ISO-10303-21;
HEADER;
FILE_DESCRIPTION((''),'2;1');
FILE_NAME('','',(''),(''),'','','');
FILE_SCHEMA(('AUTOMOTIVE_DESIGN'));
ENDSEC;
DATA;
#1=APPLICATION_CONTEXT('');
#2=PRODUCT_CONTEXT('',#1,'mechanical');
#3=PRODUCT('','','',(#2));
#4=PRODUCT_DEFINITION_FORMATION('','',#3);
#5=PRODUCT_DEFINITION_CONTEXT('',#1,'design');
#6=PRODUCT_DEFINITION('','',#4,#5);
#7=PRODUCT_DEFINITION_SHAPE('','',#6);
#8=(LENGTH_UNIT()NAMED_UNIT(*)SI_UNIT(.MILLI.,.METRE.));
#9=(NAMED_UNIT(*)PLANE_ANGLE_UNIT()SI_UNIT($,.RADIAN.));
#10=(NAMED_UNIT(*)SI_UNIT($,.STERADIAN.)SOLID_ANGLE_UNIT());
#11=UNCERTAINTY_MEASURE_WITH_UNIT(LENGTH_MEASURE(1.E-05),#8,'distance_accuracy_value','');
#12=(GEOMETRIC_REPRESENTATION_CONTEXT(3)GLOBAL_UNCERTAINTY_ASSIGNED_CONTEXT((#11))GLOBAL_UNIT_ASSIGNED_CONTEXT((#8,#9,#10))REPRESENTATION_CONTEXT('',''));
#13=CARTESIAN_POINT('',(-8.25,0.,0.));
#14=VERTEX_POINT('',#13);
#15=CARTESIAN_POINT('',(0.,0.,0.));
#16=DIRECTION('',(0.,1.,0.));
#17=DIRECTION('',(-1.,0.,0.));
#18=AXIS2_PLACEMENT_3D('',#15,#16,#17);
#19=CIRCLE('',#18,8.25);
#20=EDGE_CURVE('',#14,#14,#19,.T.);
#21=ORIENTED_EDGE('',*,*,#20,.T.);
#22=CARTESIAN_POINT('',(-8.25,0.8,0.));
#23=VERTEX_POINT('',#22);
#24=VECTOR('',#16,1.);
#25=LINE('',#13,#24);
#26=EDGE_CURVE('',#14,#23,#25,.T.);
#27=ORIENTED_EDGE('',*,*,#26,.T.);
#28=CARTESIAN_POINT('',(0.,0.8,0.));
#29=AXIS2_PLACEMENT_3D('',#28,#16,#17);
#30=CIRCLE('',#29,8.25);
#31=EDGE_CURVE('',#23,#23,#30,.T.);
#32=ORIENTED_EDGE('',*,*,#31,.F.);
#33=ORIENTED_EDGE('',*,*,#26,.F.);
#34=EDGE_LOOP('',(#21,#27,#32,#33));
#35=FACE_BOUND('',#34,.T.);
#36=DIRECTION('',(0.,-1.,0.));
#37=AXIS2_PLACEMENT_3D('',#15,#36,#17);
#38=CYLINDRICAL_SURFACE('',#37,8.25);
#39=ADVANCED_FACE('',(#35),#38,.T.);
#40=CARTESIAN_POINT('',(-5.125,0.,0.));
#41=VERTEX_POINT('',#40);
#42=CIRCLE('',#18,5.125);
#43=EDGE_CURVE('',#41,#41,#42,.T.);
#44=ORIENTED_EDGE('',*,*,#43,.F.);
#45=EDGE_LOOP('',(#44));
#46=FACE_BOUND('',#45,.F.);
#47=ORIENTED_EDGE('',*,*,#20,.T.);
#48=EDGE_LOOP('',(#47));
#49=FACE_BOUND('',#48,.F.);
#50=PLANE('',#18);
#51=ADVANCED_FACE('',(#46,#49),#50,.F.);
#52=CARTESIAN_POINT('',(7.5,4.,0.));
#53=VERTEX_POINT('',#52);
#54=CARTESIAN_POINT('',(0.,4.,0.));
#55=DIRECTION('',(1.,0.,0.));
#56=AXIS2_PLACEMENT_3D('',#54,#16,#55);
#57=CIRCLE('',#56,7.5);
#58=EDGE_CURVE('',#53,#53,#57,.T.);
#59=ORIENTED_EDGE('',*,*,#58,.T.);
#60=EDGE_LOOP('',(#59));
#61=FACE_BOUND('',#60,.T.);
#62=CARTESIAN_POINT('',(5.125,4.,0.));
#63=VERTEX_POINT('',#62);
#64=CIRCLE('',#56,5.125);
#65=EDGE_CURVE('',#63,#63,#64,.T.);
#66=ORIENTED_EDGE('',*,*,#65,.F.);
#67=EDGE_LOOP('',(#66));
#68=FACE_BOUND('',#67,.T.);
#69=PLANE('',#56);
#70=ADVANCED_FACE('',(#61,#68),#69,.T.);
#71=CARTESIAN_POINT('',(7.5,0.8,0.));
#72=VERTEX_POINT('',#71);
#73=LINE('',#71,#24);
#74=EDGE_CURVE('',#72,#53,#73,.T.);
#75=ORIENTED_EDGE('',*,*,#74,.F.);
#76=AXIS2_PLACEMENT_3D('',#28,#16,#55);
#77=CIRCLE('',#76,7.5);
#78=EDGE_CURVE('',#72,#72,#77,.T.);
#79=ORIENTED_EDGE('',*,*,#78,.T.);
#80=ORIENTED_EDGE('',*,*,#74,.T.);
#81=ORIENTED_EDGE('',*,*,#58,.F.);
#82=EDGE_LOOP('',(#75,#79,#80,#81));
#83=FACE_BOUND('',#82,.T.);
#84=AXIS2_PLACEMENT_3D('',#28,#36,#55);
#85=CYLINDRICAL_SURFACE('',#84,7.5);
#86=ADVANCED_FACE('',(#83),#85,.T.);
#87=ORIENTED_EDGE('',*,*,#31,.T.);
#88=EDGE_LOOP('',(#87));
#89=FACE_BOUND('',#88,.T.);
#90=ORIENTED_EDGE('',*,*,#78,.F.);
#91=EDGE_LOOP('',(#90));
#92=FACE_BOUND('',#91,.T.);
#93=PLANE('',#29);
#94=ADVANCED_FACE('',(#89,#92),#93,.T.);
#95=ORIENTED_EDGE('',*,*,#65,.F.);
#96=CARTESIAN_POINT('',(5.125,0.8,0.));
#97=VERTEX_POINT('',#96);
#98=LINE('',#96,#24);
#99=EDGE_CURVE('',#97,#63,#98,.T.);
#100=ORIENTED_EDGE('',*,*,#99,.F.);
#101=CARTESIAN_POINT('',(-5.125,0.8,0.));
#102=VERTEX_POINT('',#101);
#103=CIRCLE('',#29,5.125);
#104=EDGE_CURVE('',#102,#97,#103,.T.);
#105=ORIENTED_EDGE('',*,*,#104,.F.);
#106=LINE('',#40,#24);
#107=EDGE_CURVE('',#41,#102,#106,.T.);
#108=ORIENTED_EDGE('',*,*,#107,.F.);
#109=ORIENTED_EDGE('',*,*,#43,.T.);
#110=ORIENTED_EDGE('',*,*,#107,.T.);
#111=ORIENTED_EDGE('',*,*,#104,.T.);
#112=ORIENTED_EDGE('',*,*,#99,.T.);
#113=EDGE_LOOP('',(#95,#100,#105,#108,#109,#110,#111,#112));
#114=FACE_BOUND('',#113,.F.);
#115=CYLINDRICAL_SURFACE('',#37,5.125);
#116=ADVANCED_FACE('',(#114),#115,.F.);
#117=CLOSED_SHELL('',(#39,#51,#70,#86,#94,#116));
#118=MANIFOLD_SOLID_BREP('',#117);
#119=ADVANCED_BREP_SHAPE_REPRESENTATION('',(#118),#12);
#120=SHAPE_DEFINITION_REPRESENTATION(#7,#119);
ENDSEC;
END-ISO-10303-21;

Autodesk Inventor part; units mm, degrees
ref_plane "YZ Plane" through (0, 0, 0) normal (1, 0, 0) x (0, 1, 0)
ref_plane "XZ Plane" through (0, 0, 0) normal (0, 1, 0) x (-1, 0, 0)
ref_plane "XY Plane" through (0, 0, 0) normal (0, 0, 1) x (1, 0, 0)
sketch "Sketch1" plane through (0, 0, 0) normal (0, 1, 0) x (-1, 0, 0)
  circle A0 centre (0, 0) radius 8.25
  circle A1 centre (0, 0) radius 5.125
  dimension "d0" = 16.5
  dimension "d1" = 10.25
extrude "Extrusion1" add sketch "Sketch1" along normal blind 0.8
sketch "Sketch2" plane through (0, 0.8, 0) normal (0, 1, 0) x (1, 0, 0)
  circle A0 centre (0, 0) radius 7.5
  circle A1 centre (0, 0) radius 5.125 projected
  dimension "d4" = 15
extrude "Extrusion2" add sketch "Sketch2" along normal blind 3.2
properties part number "InputShaftFakeBearing"
